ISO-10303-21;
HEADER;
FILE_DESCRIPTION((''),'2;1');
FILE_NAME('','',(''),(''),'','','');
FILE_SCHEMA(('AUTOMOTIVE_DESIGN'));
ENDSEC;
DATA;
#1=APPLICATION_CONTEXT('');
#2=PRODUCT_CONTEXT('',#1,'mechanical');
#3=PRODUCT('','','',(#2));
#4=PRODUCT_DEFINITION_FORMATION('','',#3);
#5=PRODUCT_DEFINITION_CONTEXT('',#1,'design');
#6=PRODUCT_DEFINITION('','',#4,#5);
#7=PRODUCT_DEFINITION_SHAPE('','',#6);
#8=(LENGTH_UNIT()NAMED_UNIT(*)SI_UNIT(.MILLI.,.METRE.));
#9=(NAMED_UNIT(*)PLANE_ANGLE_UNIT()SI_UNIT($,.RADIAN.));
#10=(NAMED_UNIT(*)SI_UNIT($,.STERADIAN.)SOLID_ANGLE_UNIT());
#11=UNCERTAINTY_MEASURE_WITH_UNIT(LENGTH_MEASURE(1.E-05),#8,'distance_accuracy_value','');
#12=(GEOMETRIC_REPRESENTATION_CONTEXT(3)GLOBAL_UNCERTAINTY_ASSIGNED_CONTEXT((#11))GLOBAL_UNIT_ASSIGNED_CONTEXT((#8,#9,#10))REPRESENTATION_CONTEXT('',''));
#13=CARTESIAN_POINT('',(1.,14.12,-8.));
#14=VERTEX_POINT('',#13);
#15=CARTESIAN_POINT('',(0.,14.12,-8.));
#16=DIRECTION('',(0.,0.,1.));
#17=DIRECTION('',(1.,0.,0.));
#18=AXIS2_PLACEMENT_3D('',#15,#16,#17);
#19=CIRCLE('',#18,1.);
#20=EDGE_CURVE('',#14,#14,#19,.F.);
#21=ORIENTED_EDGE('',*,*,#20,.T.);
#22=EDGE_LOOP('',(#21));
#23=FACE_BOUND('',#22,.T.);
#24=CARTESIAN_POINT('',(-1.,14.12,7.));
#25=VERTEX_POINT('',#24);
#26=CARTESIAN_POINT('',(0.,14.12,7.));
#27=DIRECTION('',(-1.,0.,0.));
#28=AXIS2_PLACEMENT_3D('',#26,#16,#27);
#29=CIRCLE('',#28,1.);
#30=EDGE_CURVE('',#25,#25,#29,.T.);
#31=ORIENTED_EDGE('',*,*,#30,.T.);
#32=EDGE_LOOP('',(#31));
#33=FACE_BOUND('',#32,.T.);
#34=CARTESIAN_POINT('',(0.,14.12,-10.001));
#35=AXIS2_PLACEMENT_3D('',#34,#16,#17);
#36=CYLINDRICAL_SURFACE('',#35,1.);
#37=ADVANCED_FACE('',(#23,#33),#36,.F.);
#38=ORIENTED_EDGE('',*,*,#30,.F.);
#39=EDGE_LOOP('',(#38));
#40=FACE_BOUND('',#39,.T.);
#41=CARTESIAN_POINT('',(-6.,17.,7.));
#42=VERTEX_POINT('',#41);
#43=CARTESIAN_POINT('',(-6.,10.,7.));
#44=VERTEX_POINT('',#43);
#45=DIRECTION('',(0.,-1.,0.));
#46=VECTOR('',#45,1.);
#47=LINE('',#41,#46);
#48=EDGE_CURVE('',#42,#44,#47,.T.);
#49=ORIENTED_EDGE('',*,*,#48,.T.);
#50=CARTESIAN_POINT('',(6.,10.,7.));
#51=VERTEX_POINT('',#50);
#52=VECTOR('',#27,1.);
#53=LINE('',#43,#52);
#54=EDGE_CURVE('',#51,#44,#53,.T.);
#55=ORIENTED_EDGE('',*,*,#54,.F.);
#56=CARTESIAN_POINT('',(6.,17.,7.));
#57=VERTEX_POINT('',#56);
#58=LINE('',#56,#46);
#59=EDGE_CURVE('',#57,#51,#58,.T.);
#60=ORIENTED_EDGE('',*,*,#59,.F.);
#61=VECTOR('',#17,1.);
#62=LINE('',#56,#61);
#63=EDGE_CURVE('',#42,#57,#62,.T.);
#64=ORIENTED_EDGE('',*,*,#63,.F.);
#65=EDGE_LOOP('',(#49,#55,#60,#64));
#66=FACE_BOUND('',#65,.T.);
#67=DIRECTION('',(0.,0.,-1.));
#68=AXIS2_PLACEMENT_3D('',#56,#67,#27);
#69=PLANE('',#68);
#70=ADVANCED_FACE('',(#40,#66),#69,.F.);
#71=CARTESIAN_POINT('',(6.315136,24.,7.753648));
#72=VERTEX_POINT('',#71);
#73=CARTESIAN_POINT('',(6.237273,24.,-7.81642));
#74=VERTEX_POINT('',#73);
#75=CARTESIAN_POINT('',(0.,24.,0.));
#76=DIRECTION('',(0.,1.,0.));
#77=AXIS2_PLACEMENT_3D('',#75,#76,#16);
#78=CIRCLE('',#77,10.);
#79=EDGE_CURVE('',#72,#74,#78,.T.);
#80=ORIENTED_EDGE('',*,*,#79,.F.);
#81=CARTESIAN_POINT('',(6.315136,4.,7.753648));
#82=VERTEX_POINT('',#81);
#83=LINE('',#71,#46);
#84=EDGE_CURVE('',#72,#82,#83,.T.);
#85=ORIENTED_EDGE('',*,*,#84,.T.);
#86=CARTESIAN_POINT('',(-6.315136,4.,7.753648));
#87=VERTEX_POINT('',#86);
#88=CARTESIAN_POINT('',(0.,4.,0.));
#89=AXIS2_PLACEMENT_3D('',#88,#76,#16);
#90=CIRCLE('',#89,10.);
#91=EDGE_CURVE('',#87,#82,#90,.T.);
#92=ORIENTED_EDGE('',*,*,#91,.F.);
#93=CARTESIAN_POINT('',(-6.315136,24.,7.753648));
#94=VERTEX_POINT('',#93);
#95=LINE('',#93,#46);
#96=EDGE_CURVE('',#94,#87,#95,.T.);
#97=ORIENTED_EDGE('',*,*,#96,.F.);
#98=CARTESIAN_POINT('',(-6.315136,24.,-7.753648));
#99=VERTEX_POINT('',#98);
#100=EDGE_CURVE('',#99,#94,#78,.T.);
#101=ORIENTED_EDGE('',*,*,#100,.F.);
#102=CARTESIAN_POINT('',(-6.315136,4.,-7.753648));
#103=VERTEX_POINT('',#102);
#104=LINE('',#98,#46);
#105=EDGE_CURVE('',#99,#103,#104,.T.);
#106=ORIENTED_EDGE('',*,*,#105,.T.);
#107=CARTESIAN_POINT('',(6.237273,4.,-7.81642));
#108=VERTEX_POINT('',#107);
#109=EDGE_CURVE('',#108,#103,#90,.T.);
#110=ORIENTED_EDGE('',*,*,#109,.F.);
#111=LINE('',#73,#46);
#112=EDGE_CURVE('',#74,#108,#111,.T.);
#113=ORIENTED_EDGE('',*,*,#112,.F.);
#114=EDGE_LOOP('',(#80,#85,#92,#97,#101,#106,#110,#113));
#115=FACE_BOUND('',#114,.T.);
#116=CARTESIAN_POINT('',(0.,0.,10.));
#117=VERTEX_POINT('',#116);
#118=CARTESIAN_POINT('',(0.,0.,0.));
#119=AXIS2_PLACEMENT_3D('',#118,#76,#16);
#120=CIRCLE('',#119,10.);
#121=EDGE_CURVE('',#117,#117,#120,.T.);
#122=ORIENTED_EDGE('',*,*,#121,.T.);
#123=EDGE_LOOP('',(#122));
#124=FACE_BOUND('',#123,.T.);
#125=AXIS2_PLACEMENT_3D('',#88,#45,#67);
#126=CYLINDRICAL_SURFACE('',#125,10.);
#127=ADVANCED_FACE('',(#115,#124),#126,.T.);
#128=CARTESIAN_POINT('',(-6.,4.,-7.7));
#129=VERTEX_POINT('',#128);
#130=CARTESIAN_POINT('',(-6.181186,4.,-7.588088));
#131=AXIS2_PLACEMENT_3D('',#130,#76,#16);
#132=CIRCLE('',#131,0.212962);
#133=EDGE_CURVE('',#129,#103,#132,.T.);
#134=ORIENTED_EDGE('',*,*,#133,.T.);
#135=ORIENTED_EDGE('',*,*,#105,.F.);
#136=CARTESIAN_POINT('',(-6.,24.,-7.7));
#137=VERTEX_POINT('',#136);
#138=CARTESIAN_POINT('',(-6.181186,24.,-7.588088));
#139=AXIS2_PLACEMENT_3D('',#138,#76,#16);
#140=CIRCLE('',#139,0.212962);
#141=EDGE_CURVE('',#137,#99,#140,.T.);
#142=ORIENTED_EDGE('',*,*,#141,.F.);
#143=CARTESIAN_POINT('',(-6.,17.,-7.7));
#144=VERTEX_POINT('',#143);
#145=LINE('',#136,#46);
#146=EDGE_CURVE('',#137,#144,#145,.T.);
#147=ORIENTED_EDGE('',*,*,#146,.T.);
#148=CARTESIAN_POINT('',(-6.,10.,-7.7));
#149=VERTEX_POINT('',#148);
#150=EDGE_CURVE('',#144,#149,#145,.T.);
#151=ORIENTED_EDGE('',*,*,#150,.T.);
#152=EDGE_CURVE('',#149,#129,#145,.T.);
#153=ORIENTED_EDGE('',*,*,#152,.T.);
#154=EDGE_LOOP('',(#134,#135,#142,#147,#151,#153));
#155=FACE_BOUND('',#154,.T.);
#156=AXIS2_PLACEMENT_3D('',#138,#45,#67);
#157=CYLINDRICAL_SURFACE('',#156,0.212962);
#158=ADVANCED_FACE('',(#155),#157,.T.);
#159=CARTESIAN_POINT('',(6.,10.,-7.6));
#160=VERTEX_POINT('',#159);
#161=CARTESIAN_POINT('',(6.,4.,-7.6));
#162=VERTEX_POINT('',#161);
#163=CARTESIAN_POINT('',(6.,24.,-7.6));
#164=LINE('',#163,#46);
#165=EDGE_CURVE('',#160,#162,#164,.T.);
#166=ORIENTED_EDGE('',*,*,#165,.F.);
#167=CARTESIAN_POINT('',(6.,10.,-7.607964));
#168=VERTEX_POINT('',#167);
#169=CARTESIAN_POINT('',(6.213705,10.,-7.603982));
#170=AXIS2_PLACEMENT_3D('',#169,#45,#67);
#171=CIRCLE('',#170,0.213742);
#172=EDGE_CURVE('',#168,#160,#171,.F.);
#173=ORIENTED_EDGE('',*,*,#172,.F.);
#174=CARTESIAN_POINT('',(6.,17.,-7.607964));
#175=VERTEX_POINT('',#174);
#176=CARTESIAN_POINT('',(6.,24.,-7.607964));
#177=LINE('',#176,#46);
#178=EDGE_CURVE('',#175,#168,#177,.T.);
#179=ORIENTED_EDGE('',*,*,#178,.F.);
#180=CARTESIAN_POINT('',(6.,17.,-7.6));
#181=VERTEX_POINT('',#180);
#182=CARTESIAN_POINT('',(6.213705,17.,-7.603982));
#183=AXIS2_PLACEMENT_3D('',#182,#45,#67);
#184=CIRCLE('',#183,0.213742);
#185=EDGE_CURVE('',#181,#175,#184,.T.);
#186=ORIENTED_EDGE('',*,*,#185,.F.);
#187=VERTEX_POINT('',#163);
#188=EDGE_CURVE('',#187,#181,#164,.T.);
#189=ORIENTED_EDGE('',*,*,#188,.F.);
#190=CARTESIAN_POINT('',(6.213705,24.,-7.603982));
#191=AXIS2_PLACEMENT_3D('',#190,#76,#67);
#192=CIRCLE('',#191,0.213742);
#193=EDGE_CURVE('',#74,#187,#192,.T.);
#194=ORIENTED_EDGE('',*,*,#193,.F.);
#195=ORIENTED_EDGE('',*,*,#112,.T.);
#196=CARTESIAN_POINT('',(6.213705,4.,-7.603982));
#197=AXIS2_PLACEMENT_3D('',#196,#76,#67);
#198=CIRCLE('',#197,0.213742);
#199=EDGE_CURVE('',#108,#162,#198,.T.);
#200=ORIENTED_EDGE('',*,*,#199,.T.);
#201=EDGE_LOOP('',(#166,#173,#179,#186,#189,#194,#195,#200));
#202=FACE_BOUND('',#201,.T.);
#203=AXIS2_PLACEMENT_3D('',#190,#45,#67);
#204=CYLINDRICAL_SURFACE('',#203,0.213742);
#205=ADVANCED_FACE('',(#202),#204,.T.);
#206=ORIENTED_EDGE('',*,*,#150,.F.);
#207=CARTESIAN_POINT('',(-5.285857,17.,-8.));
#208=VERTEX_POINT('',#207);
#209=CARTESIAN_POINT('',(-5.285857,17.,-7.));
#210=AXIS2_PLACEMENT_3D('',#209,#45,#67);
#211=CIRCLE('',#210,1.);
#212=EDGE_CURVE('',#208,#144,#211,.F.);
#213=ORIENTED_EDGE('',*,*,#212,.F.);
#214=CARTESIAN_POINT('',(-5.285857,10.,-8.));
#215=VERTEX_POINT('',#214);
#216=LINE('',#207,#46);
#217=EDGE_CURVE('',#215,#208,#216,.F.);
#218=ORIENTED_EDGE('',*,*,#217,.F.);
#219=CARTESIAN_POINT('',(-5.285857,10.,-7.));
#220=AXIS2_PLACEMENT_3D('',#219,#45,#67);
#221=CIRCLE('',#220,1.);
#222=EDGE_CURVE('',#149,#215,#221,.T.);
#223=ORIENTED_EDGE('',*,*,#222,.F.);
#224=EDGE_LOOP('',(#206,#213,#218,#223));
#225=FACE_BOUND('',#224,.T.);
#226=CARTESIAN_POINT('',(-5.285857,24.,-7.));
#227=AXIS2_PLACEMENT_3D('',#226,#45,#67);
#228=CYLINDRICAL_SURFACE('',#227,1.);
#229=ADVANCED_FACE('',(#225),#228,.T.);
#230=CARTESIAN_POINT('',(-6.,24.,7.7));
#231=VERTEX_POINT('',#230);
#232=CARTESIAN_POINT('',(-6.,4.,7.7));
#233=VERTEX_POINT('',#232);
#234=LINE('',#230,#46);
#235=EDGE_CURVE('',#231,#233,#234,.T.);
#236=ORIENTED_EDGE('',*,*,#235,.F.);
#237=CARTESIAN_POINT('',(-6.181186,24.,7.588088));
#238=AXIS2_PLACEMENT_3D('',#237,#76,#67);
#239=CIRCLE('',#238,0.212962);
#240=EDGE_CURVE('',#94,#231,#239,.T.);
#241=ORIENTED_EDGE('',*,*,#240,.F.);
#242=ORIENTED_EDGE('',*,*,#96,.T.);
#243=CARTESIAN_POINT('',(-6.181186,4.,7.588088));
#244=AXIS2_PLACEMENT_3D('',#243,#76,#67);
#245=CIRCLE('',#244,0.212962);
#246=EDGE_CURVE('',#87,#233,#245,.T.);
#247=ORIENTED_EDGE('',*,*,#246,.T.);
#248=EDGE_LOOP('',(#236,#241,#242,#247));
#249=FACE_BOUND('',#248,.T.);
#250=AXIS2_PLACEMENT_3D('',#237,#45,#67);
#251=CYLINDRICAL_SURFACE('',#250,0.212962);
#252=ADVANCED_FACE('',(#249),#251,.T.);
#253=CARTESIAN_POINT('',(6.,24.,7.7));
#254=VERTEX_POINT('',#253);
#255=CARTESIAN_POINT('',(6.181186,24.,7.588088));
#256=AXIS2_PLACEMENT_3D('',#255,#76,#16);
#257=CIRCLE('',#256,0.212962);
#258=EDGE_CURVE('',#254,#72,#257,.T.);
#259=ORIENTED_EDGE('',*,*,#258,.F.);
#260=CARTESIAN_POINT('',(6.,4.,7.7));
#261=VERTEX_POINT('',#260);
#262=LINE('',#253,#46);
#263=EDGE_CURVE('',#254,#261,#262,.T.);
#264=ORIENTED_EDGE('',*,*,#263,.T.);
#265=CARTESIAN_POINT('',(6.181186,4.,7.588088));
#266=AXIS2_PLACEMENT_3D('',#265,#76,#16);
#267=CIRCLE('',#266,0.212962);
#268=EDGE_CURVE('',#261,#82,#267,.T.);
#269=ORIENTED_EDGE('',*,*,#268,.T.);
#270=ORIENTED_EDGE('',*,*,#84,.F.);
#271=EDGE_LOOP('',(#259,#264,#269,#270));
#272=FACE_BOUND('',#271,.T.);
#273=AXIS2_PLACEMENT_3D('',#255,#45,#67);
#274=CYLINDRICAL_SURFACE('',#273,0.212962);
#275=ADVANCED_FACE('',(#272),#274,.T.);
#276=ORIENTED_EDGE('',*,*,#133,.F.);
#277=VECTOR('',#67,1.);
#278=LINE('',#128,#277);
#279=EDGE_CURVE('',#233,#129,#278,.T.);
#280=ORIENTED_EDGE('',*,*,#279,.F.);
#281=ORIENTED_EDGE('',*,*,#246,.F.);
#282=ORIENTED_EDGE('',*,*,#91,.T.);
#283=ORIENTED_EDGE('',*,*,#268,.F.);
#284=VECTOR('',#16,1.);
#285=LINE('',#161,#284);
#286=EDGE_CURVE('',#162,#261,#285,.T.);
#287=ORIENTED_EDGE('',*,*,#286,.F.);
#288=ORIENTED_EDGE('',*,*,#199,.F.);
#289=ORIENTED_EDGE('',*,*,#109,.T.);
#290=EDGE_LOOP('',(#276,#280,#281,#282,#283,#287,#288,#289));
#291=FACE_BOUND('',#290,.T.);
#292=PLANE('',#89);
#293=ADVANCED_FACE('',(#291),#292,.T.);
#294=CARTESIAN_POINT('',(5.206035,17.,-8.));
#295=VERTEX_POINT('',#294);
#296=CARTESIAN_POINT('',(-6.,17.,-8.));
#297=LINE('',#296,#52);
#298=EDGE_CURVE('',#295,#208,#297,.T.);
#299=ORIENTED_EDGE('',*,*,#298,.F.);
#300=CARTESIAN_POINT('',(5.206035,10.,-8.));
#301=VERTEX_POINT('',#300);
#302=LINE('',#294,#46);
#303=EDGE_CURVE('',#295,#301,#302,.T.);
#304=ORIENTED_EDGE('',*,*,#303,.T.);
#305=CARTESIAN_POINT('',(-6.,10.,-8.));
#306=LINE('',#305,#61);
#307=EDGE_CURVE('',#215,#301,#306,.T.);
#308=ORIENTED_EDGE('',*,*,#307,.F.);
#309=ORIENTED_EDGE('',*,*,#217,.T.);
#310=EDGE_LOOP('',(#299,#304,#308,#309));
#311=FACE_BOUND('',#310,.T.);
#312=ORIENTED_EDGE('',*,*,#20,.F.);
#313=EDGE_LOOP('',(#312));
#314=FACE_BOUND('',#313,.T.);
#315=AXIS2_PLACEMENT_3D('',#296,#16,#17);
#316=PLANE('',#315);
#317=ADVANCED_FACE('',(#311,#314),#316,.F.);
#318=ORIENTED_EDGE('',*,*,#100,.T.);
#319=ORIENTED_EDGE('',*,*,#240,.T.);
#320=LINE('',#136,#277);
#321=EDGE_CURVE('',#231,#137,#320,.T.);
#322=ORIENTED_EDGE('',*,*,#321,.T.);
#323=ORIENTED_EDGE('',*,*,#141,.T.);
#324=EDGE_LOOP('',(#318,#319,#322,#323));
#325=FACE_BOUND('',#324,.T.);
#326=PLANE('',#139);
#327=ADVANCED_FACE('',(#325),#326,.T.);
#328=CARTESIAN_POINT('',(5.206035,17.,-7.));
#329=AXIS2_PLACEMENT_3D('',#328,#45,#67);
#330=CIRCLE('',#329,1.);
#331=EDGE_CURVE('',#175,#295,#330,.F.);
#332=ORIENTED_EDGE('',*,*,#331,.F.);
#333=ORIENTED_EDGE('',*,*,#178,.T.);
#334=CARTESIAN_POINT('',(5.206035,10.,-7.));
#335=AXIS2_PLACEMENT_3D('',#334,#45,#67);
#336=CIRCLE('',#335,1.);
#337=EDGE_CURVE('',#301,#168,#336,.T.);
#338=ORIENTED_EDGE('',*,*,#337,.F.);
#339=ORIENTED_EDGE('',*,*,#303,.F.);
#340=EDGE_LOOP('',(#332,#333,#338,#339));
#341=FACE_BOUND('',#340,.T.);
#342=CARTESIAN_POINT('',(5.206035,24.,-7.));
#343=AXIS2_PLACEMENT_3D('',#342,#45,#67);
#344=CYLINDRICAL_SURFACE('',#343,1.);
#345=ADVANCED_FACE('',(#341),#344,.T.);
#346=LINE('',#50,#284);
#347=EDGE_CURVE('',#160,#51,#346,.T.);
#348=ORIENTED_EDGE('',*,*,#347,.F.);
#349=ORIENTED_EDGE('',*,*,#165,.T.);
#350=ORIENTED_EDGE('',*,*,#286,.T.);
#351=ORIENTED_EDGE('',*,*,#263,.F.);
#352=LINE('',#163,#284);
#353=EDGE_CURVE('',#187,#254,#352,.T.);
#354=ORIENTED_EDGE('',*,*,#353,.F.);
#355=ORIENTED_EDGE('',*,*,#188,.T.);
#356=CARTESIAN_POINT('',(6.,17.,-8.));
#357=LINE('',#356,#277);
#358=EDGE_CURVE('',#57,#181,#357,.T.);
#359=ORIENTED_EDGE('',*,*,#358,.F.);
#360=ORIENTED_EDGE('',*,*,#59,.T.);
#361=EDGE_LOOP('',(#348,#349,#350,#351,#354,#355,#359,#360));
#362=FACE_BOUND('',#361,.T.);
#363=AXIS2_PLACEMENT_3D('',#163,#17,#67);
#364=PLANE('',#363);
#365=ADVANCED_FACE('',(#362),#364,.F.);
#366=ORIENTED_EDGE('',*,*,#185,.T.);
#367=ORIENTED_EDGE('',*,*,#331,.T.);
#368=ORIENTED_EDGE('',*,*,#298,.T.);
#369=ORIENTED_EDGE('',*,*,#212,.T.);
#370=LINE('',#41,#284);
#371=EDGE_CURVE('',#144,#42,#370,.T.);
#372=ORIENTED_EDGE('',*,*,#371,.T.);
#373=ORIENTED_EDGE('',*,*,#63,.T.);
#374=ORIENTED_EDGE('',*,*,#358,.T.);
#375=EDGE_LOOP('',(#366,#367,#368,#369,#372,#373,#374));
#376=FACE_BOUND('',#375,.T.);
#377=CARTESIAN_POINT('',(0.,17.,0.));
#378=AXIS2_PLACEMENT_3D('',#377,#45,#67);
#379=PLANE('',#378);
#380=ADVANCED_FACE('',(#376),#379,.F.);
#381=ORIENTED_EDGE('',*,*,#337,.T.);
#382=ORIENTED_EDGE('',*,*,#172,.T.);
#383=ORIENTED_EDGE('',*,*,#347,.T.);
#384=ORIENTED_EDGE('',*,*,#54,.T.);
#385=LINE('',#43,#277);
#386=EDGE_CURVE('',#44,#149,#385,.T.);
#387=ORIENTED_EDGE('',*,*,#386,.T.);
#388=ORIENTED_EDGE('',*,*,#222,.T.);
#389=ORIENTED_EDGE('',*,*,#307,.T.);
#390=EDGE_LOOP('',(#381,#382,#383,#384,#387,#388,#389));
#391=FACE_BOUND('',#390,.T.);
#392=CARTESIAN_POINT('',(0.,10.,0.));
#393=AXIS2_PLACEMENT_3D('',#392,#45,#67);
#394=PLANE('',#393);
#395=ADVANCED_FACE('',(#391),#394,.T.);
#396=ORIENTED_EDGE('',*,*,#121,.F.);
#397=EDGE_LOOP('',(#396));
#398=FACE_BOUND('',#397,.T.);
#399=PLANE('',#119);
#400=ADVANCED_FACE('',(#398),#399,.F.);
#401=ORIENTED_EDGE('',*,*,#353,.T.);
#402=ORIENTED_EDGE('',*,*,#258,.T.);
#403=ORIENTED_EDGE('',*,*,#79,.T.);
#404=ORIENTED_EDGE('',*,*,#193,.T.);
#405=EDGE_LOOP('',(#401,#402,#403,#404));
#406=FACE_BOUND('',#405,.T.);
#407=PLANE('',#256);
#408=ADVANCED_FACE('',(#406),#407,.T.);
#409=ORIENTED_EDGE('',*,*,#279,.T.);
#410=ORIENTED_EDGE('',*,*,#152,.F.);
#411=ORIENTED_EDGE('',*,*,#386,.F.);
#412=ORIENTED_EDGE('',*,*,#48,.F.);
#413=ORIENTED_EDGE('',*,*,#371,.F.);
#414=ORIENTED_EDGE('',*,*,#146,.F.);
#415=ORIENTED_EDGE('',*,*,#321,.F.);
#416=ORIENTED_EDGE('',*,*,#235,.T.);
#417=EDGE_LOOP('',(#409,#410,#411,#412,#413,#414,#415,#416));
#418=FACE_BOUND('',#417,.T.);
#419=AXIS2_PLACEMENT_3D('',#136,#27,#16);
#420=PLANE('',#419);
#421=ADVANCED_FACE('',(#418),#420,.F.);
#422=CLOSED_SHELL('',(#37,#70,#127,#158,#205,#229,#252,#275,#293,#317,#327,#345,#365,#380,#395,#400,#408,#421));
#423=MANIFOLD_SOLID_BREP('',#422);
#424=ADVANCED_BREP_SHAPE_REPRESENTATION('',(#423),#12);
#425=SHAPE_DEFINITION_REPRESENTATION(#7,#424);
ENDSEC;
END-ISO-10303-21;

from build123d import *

# Parameters (mm, degrees)
SKETCH1_R           = 10
BOSS_EXTRUDE1_DEPTH = 4
BOSS_EXTRUDE2_DEPTH = 20
SKETCH6_W           = 12
SKETCH6_H           = 15
BOSS_EXTRUDE4_DEPTH = 3
SKETCH10_W          = 12
SKETCH10_H          = 15
BOSS_EXTRUDE5_DEPTH = 4
FILLET1_R           = 1
CUT_EXTRUDE3_REACH  = 33.064
SKETCH7_R           = 1


with BuildPart() as part:
    # Sketch1 → Boss-Extrude1 (new body)
    with BuildSketch(Plane(origin=(0, 0, 0), x_dir=(1, 0, 0), z_dir=(0, 1, 0))):
        with Locations(Location((0, 0, 0), (0, 0, 270))):
            Circle(SKETCH1_R)
    extrude(amount=BOSS_EXTRUDE1_DEPTH)

    # Sketch2 → Boss-Extrude2 (add)
    with BuildSketch(Plane(origin=(0, 4, 0), x_dir=(1, 0, 0), z_dir=(0, 1, 0))):
        with BuildLine():
            Line((-6, 7.7), (-6, -7.7))
            ThreePointArc((-6, -7.7), (-6.145446182, -7.798029265), (-6.315135994, -7.753648005))
            ThreePointArc((-6.315135994, -7.753648005), (-10, 0), (-6.315135994, 7.753648005))
            ThreePointArc((-6.315135994, 7.753648005), (-6.145446182, 7.798029265), (-6, 7.7))
        make_face()
        with BuildLine():
            Line((6, 7.6), (6, -7.7))
            ThreePointArc((6, -7.7), (6.145446182, -7.798029265), (6.315135994, -7.753648005))
            ThreePointArc((6.315135994, -7.753648005), (9.999874962, 0.050007502), (6.237272998, 7.816420251))
            ThreePointArc((6.237272998, 7.816420251), (6.069665116, 7.76190005), (6, 7.6))
        make_face()
    extrude(amount=BOSS_EXTRUDE2_DEPTH)

    # Sketch6 → Boss-Extrude4 (add)
    with BuildSketch(Plane(origin=(0, 14, 0), x_dir=(1, 0, 0), z_dir=(0, 1, 0))):
        with Locations((0, 0.5)):
            Rectangle(SKETCH6_W, SKETCH6_H)
    extrude(amount=BOSS_EXTRUDE4_DEPTH)

    # Sketch10 → Boss-Extrude5 (add)
    with BuildSketch(Plane.XZ.offset(-14)):
        with Locations((0, -0.5)):
            Rectangle(SKETCH10_W, SKETCH10_H)
    extrude(amount=BOSS_EXTRUDE5_DEPTH)

    # Fillet1
    # the kernel refuses this fillet: 1 mm, written as the material it takes off along each edge
    with BuildSketch(Plane(origin=(6, 14, -8), x_dir=(0, 0, 1), z_dir=(0, -1, 0))) as fillet1_piece_1_section:
        with BuildLine():
            CenterArc((1, 0.793964744), FILLET1_R, 180, 52.557582208)
            Line((0, 0.793964744), (-0.02, 0.793964744))
            Line((-0.02, 0.793964744), (-0.02, 0))
            Line((-0.02, 0), (0, -0.02))
            ThreePointArc((0, -0.02), (0.196018099, -0.02), (0.379876922, -0.015879295))
            Line((0.379876922, -0.015879295), (0.392036198, 0))
        make_face()
    fillet1_piece_1 = extrude(amount=5.984911861, mode=Mode.PRIVATE)
    fillet1_piece_1 = fillet1_piece_1 - Plane(origin=(6.213704622, 11.00754407, -7.603981901), x_dir=(0.11026568498271415, 0, -0.993902147454815), z_dir=(0, -1, 0)) * Cylinder(0.213741715, 16, mode=Mode.PRIVATE)
    add(fillet1_piece_1, mode=Mode.SUBTRACT)
    with BuildSketch(Plane(origin=(-6, 14, -8), x_dir=(0, 0, 1), z_dir=(0, -1, 0))) as fillet1_piece_2_section:
        with BuildLine():
            CenterArc((1, -0.714142843), FILLET1_R, 134.427004001, 45.572995999)
            Line((0, -0.714142843), (-0.02, -0.714142843))
            Line((-0.02, -0.714142843), (-0.02, 0))
            Line((-0.02, 0), (0, 0.02))
            ThreePointArc((0, 0.02), (0.15, 0.02), (0.286, 0.014282857))
            Line((0.286, 0.014282857), (0.3, 0))
        make_face()
    fillet1_piece_2 = extrude(amount=5.785357107, mode=Mode.PRIVATE)
    fillet1_piece_2 = fillet1_piece_2 - Plane(origin=(-6.181186106, 11.107321446, -7.588087879), x_dir=(-0.628985521858462, 0, -0.7774170137657384), z_dir=(0, -1, 0)) * Cylinder(0.212961798, 15, mode=Mode.PRIVATE)
    add(fillet1_piece_2, mode=Mode.SUBTRACT)
    with BuildSketch(Plane(origin=(-6, 14, -8), x_dir=(0, 0, 1), z_dir=(0, 1, 0))) as fillet1_piece_3_section:
        with BuildLine():
            CenterArc((1, 0.714142843), FILLET1_R, 180, 45.572995999)
            Line((0, 0.714142843), (-0.02, 0.714142843))
            Line((-0.02, 0.714142843), (-0.02, 0))
            Line((-0.02, 0), (0, -0.02))
            ThreePointArc((0, -0.02), (0.15, -0.02), (0.286, -0.014282857))
            Line((0.286, -0.014282857), (0.3, 0))
        make_face()
    fillet1_piece_3 = extrude(amount=4.785357107, mode=Mode.PRIVATE)
    fillet1_piece_3 = fillet1_piece_3 - Plane(origin=(-6.181186106, 16.392678554, -7.588087879), x_dir=(-0.628985521858462, 0, -0.7774170137657384), z_dir=(0, -1, 0)) * Cylinder(0.212961798, 13, mode=Mode.PRIVATE)
    add(fillet1_piece_3, mode=Mode.SUBTRACT)
    with BuildSketch(Plane(origin=(6, 14, -8), x_dir=(0, 0, 1), z_dir=(0, 1, 0))) as fillet1_piece_4_section:
        with BuildLine():
            CenterArc((1, -0.793964744), FILLET1_R, 127.442417792, 52.557582208)
            Line((0, -0.793964744), (-0.02, -0.793964744))
            Line((-0.02, -0.793964744), (-0.02, 0))
            Line((-0.02, 0), (0, 0.02))
            ThreePointArc((0, 0.02), (0.196018099, 0.02), (0.379876922, 0.015879295))
            Line((0.379876922, 0.015879295), (0.392036198, 0))
        make_face()
    fillet1_piece_4 = extrude(amount=4.984911861, mode=Mode.PRIVATE)
    fillet1_piece_4 = fillet1_piece_4 - Plane(origin=(6.213704622, 16.49245593, -7.603981901), x_dir=(0.11026568498271415, 0, -0.993902147454815), z_dir=(0, -1, 0)) * Cylinder(0.213741715, 14, mode=Mode.PRIVATE)
    add(fillet1_piece_4, mode=Mode.SUBTRACT)

    # Sketch7 → Cut-Extrude3 (cut, up to next)
    with BuildSketch(Plane.XY.offset(7), mode=Mode.PRIVATE) as cut_extrude3_sk1:
        with Locations((0, 14.12)):
            Circle(SKETCH7_R)
    cut_extrude3_tool1 = extrude(cut_extrude3_sk1.sketch, amount=-CUT_EXTRUDE3_REACH, mode=Mode.PRIVATE) & part.part
    add(cut_extrude3_tool1.solids().sort_by_distance((0, 14.12, 7))[0], mode=Mode.SUBTRACT)


solid = part.part
